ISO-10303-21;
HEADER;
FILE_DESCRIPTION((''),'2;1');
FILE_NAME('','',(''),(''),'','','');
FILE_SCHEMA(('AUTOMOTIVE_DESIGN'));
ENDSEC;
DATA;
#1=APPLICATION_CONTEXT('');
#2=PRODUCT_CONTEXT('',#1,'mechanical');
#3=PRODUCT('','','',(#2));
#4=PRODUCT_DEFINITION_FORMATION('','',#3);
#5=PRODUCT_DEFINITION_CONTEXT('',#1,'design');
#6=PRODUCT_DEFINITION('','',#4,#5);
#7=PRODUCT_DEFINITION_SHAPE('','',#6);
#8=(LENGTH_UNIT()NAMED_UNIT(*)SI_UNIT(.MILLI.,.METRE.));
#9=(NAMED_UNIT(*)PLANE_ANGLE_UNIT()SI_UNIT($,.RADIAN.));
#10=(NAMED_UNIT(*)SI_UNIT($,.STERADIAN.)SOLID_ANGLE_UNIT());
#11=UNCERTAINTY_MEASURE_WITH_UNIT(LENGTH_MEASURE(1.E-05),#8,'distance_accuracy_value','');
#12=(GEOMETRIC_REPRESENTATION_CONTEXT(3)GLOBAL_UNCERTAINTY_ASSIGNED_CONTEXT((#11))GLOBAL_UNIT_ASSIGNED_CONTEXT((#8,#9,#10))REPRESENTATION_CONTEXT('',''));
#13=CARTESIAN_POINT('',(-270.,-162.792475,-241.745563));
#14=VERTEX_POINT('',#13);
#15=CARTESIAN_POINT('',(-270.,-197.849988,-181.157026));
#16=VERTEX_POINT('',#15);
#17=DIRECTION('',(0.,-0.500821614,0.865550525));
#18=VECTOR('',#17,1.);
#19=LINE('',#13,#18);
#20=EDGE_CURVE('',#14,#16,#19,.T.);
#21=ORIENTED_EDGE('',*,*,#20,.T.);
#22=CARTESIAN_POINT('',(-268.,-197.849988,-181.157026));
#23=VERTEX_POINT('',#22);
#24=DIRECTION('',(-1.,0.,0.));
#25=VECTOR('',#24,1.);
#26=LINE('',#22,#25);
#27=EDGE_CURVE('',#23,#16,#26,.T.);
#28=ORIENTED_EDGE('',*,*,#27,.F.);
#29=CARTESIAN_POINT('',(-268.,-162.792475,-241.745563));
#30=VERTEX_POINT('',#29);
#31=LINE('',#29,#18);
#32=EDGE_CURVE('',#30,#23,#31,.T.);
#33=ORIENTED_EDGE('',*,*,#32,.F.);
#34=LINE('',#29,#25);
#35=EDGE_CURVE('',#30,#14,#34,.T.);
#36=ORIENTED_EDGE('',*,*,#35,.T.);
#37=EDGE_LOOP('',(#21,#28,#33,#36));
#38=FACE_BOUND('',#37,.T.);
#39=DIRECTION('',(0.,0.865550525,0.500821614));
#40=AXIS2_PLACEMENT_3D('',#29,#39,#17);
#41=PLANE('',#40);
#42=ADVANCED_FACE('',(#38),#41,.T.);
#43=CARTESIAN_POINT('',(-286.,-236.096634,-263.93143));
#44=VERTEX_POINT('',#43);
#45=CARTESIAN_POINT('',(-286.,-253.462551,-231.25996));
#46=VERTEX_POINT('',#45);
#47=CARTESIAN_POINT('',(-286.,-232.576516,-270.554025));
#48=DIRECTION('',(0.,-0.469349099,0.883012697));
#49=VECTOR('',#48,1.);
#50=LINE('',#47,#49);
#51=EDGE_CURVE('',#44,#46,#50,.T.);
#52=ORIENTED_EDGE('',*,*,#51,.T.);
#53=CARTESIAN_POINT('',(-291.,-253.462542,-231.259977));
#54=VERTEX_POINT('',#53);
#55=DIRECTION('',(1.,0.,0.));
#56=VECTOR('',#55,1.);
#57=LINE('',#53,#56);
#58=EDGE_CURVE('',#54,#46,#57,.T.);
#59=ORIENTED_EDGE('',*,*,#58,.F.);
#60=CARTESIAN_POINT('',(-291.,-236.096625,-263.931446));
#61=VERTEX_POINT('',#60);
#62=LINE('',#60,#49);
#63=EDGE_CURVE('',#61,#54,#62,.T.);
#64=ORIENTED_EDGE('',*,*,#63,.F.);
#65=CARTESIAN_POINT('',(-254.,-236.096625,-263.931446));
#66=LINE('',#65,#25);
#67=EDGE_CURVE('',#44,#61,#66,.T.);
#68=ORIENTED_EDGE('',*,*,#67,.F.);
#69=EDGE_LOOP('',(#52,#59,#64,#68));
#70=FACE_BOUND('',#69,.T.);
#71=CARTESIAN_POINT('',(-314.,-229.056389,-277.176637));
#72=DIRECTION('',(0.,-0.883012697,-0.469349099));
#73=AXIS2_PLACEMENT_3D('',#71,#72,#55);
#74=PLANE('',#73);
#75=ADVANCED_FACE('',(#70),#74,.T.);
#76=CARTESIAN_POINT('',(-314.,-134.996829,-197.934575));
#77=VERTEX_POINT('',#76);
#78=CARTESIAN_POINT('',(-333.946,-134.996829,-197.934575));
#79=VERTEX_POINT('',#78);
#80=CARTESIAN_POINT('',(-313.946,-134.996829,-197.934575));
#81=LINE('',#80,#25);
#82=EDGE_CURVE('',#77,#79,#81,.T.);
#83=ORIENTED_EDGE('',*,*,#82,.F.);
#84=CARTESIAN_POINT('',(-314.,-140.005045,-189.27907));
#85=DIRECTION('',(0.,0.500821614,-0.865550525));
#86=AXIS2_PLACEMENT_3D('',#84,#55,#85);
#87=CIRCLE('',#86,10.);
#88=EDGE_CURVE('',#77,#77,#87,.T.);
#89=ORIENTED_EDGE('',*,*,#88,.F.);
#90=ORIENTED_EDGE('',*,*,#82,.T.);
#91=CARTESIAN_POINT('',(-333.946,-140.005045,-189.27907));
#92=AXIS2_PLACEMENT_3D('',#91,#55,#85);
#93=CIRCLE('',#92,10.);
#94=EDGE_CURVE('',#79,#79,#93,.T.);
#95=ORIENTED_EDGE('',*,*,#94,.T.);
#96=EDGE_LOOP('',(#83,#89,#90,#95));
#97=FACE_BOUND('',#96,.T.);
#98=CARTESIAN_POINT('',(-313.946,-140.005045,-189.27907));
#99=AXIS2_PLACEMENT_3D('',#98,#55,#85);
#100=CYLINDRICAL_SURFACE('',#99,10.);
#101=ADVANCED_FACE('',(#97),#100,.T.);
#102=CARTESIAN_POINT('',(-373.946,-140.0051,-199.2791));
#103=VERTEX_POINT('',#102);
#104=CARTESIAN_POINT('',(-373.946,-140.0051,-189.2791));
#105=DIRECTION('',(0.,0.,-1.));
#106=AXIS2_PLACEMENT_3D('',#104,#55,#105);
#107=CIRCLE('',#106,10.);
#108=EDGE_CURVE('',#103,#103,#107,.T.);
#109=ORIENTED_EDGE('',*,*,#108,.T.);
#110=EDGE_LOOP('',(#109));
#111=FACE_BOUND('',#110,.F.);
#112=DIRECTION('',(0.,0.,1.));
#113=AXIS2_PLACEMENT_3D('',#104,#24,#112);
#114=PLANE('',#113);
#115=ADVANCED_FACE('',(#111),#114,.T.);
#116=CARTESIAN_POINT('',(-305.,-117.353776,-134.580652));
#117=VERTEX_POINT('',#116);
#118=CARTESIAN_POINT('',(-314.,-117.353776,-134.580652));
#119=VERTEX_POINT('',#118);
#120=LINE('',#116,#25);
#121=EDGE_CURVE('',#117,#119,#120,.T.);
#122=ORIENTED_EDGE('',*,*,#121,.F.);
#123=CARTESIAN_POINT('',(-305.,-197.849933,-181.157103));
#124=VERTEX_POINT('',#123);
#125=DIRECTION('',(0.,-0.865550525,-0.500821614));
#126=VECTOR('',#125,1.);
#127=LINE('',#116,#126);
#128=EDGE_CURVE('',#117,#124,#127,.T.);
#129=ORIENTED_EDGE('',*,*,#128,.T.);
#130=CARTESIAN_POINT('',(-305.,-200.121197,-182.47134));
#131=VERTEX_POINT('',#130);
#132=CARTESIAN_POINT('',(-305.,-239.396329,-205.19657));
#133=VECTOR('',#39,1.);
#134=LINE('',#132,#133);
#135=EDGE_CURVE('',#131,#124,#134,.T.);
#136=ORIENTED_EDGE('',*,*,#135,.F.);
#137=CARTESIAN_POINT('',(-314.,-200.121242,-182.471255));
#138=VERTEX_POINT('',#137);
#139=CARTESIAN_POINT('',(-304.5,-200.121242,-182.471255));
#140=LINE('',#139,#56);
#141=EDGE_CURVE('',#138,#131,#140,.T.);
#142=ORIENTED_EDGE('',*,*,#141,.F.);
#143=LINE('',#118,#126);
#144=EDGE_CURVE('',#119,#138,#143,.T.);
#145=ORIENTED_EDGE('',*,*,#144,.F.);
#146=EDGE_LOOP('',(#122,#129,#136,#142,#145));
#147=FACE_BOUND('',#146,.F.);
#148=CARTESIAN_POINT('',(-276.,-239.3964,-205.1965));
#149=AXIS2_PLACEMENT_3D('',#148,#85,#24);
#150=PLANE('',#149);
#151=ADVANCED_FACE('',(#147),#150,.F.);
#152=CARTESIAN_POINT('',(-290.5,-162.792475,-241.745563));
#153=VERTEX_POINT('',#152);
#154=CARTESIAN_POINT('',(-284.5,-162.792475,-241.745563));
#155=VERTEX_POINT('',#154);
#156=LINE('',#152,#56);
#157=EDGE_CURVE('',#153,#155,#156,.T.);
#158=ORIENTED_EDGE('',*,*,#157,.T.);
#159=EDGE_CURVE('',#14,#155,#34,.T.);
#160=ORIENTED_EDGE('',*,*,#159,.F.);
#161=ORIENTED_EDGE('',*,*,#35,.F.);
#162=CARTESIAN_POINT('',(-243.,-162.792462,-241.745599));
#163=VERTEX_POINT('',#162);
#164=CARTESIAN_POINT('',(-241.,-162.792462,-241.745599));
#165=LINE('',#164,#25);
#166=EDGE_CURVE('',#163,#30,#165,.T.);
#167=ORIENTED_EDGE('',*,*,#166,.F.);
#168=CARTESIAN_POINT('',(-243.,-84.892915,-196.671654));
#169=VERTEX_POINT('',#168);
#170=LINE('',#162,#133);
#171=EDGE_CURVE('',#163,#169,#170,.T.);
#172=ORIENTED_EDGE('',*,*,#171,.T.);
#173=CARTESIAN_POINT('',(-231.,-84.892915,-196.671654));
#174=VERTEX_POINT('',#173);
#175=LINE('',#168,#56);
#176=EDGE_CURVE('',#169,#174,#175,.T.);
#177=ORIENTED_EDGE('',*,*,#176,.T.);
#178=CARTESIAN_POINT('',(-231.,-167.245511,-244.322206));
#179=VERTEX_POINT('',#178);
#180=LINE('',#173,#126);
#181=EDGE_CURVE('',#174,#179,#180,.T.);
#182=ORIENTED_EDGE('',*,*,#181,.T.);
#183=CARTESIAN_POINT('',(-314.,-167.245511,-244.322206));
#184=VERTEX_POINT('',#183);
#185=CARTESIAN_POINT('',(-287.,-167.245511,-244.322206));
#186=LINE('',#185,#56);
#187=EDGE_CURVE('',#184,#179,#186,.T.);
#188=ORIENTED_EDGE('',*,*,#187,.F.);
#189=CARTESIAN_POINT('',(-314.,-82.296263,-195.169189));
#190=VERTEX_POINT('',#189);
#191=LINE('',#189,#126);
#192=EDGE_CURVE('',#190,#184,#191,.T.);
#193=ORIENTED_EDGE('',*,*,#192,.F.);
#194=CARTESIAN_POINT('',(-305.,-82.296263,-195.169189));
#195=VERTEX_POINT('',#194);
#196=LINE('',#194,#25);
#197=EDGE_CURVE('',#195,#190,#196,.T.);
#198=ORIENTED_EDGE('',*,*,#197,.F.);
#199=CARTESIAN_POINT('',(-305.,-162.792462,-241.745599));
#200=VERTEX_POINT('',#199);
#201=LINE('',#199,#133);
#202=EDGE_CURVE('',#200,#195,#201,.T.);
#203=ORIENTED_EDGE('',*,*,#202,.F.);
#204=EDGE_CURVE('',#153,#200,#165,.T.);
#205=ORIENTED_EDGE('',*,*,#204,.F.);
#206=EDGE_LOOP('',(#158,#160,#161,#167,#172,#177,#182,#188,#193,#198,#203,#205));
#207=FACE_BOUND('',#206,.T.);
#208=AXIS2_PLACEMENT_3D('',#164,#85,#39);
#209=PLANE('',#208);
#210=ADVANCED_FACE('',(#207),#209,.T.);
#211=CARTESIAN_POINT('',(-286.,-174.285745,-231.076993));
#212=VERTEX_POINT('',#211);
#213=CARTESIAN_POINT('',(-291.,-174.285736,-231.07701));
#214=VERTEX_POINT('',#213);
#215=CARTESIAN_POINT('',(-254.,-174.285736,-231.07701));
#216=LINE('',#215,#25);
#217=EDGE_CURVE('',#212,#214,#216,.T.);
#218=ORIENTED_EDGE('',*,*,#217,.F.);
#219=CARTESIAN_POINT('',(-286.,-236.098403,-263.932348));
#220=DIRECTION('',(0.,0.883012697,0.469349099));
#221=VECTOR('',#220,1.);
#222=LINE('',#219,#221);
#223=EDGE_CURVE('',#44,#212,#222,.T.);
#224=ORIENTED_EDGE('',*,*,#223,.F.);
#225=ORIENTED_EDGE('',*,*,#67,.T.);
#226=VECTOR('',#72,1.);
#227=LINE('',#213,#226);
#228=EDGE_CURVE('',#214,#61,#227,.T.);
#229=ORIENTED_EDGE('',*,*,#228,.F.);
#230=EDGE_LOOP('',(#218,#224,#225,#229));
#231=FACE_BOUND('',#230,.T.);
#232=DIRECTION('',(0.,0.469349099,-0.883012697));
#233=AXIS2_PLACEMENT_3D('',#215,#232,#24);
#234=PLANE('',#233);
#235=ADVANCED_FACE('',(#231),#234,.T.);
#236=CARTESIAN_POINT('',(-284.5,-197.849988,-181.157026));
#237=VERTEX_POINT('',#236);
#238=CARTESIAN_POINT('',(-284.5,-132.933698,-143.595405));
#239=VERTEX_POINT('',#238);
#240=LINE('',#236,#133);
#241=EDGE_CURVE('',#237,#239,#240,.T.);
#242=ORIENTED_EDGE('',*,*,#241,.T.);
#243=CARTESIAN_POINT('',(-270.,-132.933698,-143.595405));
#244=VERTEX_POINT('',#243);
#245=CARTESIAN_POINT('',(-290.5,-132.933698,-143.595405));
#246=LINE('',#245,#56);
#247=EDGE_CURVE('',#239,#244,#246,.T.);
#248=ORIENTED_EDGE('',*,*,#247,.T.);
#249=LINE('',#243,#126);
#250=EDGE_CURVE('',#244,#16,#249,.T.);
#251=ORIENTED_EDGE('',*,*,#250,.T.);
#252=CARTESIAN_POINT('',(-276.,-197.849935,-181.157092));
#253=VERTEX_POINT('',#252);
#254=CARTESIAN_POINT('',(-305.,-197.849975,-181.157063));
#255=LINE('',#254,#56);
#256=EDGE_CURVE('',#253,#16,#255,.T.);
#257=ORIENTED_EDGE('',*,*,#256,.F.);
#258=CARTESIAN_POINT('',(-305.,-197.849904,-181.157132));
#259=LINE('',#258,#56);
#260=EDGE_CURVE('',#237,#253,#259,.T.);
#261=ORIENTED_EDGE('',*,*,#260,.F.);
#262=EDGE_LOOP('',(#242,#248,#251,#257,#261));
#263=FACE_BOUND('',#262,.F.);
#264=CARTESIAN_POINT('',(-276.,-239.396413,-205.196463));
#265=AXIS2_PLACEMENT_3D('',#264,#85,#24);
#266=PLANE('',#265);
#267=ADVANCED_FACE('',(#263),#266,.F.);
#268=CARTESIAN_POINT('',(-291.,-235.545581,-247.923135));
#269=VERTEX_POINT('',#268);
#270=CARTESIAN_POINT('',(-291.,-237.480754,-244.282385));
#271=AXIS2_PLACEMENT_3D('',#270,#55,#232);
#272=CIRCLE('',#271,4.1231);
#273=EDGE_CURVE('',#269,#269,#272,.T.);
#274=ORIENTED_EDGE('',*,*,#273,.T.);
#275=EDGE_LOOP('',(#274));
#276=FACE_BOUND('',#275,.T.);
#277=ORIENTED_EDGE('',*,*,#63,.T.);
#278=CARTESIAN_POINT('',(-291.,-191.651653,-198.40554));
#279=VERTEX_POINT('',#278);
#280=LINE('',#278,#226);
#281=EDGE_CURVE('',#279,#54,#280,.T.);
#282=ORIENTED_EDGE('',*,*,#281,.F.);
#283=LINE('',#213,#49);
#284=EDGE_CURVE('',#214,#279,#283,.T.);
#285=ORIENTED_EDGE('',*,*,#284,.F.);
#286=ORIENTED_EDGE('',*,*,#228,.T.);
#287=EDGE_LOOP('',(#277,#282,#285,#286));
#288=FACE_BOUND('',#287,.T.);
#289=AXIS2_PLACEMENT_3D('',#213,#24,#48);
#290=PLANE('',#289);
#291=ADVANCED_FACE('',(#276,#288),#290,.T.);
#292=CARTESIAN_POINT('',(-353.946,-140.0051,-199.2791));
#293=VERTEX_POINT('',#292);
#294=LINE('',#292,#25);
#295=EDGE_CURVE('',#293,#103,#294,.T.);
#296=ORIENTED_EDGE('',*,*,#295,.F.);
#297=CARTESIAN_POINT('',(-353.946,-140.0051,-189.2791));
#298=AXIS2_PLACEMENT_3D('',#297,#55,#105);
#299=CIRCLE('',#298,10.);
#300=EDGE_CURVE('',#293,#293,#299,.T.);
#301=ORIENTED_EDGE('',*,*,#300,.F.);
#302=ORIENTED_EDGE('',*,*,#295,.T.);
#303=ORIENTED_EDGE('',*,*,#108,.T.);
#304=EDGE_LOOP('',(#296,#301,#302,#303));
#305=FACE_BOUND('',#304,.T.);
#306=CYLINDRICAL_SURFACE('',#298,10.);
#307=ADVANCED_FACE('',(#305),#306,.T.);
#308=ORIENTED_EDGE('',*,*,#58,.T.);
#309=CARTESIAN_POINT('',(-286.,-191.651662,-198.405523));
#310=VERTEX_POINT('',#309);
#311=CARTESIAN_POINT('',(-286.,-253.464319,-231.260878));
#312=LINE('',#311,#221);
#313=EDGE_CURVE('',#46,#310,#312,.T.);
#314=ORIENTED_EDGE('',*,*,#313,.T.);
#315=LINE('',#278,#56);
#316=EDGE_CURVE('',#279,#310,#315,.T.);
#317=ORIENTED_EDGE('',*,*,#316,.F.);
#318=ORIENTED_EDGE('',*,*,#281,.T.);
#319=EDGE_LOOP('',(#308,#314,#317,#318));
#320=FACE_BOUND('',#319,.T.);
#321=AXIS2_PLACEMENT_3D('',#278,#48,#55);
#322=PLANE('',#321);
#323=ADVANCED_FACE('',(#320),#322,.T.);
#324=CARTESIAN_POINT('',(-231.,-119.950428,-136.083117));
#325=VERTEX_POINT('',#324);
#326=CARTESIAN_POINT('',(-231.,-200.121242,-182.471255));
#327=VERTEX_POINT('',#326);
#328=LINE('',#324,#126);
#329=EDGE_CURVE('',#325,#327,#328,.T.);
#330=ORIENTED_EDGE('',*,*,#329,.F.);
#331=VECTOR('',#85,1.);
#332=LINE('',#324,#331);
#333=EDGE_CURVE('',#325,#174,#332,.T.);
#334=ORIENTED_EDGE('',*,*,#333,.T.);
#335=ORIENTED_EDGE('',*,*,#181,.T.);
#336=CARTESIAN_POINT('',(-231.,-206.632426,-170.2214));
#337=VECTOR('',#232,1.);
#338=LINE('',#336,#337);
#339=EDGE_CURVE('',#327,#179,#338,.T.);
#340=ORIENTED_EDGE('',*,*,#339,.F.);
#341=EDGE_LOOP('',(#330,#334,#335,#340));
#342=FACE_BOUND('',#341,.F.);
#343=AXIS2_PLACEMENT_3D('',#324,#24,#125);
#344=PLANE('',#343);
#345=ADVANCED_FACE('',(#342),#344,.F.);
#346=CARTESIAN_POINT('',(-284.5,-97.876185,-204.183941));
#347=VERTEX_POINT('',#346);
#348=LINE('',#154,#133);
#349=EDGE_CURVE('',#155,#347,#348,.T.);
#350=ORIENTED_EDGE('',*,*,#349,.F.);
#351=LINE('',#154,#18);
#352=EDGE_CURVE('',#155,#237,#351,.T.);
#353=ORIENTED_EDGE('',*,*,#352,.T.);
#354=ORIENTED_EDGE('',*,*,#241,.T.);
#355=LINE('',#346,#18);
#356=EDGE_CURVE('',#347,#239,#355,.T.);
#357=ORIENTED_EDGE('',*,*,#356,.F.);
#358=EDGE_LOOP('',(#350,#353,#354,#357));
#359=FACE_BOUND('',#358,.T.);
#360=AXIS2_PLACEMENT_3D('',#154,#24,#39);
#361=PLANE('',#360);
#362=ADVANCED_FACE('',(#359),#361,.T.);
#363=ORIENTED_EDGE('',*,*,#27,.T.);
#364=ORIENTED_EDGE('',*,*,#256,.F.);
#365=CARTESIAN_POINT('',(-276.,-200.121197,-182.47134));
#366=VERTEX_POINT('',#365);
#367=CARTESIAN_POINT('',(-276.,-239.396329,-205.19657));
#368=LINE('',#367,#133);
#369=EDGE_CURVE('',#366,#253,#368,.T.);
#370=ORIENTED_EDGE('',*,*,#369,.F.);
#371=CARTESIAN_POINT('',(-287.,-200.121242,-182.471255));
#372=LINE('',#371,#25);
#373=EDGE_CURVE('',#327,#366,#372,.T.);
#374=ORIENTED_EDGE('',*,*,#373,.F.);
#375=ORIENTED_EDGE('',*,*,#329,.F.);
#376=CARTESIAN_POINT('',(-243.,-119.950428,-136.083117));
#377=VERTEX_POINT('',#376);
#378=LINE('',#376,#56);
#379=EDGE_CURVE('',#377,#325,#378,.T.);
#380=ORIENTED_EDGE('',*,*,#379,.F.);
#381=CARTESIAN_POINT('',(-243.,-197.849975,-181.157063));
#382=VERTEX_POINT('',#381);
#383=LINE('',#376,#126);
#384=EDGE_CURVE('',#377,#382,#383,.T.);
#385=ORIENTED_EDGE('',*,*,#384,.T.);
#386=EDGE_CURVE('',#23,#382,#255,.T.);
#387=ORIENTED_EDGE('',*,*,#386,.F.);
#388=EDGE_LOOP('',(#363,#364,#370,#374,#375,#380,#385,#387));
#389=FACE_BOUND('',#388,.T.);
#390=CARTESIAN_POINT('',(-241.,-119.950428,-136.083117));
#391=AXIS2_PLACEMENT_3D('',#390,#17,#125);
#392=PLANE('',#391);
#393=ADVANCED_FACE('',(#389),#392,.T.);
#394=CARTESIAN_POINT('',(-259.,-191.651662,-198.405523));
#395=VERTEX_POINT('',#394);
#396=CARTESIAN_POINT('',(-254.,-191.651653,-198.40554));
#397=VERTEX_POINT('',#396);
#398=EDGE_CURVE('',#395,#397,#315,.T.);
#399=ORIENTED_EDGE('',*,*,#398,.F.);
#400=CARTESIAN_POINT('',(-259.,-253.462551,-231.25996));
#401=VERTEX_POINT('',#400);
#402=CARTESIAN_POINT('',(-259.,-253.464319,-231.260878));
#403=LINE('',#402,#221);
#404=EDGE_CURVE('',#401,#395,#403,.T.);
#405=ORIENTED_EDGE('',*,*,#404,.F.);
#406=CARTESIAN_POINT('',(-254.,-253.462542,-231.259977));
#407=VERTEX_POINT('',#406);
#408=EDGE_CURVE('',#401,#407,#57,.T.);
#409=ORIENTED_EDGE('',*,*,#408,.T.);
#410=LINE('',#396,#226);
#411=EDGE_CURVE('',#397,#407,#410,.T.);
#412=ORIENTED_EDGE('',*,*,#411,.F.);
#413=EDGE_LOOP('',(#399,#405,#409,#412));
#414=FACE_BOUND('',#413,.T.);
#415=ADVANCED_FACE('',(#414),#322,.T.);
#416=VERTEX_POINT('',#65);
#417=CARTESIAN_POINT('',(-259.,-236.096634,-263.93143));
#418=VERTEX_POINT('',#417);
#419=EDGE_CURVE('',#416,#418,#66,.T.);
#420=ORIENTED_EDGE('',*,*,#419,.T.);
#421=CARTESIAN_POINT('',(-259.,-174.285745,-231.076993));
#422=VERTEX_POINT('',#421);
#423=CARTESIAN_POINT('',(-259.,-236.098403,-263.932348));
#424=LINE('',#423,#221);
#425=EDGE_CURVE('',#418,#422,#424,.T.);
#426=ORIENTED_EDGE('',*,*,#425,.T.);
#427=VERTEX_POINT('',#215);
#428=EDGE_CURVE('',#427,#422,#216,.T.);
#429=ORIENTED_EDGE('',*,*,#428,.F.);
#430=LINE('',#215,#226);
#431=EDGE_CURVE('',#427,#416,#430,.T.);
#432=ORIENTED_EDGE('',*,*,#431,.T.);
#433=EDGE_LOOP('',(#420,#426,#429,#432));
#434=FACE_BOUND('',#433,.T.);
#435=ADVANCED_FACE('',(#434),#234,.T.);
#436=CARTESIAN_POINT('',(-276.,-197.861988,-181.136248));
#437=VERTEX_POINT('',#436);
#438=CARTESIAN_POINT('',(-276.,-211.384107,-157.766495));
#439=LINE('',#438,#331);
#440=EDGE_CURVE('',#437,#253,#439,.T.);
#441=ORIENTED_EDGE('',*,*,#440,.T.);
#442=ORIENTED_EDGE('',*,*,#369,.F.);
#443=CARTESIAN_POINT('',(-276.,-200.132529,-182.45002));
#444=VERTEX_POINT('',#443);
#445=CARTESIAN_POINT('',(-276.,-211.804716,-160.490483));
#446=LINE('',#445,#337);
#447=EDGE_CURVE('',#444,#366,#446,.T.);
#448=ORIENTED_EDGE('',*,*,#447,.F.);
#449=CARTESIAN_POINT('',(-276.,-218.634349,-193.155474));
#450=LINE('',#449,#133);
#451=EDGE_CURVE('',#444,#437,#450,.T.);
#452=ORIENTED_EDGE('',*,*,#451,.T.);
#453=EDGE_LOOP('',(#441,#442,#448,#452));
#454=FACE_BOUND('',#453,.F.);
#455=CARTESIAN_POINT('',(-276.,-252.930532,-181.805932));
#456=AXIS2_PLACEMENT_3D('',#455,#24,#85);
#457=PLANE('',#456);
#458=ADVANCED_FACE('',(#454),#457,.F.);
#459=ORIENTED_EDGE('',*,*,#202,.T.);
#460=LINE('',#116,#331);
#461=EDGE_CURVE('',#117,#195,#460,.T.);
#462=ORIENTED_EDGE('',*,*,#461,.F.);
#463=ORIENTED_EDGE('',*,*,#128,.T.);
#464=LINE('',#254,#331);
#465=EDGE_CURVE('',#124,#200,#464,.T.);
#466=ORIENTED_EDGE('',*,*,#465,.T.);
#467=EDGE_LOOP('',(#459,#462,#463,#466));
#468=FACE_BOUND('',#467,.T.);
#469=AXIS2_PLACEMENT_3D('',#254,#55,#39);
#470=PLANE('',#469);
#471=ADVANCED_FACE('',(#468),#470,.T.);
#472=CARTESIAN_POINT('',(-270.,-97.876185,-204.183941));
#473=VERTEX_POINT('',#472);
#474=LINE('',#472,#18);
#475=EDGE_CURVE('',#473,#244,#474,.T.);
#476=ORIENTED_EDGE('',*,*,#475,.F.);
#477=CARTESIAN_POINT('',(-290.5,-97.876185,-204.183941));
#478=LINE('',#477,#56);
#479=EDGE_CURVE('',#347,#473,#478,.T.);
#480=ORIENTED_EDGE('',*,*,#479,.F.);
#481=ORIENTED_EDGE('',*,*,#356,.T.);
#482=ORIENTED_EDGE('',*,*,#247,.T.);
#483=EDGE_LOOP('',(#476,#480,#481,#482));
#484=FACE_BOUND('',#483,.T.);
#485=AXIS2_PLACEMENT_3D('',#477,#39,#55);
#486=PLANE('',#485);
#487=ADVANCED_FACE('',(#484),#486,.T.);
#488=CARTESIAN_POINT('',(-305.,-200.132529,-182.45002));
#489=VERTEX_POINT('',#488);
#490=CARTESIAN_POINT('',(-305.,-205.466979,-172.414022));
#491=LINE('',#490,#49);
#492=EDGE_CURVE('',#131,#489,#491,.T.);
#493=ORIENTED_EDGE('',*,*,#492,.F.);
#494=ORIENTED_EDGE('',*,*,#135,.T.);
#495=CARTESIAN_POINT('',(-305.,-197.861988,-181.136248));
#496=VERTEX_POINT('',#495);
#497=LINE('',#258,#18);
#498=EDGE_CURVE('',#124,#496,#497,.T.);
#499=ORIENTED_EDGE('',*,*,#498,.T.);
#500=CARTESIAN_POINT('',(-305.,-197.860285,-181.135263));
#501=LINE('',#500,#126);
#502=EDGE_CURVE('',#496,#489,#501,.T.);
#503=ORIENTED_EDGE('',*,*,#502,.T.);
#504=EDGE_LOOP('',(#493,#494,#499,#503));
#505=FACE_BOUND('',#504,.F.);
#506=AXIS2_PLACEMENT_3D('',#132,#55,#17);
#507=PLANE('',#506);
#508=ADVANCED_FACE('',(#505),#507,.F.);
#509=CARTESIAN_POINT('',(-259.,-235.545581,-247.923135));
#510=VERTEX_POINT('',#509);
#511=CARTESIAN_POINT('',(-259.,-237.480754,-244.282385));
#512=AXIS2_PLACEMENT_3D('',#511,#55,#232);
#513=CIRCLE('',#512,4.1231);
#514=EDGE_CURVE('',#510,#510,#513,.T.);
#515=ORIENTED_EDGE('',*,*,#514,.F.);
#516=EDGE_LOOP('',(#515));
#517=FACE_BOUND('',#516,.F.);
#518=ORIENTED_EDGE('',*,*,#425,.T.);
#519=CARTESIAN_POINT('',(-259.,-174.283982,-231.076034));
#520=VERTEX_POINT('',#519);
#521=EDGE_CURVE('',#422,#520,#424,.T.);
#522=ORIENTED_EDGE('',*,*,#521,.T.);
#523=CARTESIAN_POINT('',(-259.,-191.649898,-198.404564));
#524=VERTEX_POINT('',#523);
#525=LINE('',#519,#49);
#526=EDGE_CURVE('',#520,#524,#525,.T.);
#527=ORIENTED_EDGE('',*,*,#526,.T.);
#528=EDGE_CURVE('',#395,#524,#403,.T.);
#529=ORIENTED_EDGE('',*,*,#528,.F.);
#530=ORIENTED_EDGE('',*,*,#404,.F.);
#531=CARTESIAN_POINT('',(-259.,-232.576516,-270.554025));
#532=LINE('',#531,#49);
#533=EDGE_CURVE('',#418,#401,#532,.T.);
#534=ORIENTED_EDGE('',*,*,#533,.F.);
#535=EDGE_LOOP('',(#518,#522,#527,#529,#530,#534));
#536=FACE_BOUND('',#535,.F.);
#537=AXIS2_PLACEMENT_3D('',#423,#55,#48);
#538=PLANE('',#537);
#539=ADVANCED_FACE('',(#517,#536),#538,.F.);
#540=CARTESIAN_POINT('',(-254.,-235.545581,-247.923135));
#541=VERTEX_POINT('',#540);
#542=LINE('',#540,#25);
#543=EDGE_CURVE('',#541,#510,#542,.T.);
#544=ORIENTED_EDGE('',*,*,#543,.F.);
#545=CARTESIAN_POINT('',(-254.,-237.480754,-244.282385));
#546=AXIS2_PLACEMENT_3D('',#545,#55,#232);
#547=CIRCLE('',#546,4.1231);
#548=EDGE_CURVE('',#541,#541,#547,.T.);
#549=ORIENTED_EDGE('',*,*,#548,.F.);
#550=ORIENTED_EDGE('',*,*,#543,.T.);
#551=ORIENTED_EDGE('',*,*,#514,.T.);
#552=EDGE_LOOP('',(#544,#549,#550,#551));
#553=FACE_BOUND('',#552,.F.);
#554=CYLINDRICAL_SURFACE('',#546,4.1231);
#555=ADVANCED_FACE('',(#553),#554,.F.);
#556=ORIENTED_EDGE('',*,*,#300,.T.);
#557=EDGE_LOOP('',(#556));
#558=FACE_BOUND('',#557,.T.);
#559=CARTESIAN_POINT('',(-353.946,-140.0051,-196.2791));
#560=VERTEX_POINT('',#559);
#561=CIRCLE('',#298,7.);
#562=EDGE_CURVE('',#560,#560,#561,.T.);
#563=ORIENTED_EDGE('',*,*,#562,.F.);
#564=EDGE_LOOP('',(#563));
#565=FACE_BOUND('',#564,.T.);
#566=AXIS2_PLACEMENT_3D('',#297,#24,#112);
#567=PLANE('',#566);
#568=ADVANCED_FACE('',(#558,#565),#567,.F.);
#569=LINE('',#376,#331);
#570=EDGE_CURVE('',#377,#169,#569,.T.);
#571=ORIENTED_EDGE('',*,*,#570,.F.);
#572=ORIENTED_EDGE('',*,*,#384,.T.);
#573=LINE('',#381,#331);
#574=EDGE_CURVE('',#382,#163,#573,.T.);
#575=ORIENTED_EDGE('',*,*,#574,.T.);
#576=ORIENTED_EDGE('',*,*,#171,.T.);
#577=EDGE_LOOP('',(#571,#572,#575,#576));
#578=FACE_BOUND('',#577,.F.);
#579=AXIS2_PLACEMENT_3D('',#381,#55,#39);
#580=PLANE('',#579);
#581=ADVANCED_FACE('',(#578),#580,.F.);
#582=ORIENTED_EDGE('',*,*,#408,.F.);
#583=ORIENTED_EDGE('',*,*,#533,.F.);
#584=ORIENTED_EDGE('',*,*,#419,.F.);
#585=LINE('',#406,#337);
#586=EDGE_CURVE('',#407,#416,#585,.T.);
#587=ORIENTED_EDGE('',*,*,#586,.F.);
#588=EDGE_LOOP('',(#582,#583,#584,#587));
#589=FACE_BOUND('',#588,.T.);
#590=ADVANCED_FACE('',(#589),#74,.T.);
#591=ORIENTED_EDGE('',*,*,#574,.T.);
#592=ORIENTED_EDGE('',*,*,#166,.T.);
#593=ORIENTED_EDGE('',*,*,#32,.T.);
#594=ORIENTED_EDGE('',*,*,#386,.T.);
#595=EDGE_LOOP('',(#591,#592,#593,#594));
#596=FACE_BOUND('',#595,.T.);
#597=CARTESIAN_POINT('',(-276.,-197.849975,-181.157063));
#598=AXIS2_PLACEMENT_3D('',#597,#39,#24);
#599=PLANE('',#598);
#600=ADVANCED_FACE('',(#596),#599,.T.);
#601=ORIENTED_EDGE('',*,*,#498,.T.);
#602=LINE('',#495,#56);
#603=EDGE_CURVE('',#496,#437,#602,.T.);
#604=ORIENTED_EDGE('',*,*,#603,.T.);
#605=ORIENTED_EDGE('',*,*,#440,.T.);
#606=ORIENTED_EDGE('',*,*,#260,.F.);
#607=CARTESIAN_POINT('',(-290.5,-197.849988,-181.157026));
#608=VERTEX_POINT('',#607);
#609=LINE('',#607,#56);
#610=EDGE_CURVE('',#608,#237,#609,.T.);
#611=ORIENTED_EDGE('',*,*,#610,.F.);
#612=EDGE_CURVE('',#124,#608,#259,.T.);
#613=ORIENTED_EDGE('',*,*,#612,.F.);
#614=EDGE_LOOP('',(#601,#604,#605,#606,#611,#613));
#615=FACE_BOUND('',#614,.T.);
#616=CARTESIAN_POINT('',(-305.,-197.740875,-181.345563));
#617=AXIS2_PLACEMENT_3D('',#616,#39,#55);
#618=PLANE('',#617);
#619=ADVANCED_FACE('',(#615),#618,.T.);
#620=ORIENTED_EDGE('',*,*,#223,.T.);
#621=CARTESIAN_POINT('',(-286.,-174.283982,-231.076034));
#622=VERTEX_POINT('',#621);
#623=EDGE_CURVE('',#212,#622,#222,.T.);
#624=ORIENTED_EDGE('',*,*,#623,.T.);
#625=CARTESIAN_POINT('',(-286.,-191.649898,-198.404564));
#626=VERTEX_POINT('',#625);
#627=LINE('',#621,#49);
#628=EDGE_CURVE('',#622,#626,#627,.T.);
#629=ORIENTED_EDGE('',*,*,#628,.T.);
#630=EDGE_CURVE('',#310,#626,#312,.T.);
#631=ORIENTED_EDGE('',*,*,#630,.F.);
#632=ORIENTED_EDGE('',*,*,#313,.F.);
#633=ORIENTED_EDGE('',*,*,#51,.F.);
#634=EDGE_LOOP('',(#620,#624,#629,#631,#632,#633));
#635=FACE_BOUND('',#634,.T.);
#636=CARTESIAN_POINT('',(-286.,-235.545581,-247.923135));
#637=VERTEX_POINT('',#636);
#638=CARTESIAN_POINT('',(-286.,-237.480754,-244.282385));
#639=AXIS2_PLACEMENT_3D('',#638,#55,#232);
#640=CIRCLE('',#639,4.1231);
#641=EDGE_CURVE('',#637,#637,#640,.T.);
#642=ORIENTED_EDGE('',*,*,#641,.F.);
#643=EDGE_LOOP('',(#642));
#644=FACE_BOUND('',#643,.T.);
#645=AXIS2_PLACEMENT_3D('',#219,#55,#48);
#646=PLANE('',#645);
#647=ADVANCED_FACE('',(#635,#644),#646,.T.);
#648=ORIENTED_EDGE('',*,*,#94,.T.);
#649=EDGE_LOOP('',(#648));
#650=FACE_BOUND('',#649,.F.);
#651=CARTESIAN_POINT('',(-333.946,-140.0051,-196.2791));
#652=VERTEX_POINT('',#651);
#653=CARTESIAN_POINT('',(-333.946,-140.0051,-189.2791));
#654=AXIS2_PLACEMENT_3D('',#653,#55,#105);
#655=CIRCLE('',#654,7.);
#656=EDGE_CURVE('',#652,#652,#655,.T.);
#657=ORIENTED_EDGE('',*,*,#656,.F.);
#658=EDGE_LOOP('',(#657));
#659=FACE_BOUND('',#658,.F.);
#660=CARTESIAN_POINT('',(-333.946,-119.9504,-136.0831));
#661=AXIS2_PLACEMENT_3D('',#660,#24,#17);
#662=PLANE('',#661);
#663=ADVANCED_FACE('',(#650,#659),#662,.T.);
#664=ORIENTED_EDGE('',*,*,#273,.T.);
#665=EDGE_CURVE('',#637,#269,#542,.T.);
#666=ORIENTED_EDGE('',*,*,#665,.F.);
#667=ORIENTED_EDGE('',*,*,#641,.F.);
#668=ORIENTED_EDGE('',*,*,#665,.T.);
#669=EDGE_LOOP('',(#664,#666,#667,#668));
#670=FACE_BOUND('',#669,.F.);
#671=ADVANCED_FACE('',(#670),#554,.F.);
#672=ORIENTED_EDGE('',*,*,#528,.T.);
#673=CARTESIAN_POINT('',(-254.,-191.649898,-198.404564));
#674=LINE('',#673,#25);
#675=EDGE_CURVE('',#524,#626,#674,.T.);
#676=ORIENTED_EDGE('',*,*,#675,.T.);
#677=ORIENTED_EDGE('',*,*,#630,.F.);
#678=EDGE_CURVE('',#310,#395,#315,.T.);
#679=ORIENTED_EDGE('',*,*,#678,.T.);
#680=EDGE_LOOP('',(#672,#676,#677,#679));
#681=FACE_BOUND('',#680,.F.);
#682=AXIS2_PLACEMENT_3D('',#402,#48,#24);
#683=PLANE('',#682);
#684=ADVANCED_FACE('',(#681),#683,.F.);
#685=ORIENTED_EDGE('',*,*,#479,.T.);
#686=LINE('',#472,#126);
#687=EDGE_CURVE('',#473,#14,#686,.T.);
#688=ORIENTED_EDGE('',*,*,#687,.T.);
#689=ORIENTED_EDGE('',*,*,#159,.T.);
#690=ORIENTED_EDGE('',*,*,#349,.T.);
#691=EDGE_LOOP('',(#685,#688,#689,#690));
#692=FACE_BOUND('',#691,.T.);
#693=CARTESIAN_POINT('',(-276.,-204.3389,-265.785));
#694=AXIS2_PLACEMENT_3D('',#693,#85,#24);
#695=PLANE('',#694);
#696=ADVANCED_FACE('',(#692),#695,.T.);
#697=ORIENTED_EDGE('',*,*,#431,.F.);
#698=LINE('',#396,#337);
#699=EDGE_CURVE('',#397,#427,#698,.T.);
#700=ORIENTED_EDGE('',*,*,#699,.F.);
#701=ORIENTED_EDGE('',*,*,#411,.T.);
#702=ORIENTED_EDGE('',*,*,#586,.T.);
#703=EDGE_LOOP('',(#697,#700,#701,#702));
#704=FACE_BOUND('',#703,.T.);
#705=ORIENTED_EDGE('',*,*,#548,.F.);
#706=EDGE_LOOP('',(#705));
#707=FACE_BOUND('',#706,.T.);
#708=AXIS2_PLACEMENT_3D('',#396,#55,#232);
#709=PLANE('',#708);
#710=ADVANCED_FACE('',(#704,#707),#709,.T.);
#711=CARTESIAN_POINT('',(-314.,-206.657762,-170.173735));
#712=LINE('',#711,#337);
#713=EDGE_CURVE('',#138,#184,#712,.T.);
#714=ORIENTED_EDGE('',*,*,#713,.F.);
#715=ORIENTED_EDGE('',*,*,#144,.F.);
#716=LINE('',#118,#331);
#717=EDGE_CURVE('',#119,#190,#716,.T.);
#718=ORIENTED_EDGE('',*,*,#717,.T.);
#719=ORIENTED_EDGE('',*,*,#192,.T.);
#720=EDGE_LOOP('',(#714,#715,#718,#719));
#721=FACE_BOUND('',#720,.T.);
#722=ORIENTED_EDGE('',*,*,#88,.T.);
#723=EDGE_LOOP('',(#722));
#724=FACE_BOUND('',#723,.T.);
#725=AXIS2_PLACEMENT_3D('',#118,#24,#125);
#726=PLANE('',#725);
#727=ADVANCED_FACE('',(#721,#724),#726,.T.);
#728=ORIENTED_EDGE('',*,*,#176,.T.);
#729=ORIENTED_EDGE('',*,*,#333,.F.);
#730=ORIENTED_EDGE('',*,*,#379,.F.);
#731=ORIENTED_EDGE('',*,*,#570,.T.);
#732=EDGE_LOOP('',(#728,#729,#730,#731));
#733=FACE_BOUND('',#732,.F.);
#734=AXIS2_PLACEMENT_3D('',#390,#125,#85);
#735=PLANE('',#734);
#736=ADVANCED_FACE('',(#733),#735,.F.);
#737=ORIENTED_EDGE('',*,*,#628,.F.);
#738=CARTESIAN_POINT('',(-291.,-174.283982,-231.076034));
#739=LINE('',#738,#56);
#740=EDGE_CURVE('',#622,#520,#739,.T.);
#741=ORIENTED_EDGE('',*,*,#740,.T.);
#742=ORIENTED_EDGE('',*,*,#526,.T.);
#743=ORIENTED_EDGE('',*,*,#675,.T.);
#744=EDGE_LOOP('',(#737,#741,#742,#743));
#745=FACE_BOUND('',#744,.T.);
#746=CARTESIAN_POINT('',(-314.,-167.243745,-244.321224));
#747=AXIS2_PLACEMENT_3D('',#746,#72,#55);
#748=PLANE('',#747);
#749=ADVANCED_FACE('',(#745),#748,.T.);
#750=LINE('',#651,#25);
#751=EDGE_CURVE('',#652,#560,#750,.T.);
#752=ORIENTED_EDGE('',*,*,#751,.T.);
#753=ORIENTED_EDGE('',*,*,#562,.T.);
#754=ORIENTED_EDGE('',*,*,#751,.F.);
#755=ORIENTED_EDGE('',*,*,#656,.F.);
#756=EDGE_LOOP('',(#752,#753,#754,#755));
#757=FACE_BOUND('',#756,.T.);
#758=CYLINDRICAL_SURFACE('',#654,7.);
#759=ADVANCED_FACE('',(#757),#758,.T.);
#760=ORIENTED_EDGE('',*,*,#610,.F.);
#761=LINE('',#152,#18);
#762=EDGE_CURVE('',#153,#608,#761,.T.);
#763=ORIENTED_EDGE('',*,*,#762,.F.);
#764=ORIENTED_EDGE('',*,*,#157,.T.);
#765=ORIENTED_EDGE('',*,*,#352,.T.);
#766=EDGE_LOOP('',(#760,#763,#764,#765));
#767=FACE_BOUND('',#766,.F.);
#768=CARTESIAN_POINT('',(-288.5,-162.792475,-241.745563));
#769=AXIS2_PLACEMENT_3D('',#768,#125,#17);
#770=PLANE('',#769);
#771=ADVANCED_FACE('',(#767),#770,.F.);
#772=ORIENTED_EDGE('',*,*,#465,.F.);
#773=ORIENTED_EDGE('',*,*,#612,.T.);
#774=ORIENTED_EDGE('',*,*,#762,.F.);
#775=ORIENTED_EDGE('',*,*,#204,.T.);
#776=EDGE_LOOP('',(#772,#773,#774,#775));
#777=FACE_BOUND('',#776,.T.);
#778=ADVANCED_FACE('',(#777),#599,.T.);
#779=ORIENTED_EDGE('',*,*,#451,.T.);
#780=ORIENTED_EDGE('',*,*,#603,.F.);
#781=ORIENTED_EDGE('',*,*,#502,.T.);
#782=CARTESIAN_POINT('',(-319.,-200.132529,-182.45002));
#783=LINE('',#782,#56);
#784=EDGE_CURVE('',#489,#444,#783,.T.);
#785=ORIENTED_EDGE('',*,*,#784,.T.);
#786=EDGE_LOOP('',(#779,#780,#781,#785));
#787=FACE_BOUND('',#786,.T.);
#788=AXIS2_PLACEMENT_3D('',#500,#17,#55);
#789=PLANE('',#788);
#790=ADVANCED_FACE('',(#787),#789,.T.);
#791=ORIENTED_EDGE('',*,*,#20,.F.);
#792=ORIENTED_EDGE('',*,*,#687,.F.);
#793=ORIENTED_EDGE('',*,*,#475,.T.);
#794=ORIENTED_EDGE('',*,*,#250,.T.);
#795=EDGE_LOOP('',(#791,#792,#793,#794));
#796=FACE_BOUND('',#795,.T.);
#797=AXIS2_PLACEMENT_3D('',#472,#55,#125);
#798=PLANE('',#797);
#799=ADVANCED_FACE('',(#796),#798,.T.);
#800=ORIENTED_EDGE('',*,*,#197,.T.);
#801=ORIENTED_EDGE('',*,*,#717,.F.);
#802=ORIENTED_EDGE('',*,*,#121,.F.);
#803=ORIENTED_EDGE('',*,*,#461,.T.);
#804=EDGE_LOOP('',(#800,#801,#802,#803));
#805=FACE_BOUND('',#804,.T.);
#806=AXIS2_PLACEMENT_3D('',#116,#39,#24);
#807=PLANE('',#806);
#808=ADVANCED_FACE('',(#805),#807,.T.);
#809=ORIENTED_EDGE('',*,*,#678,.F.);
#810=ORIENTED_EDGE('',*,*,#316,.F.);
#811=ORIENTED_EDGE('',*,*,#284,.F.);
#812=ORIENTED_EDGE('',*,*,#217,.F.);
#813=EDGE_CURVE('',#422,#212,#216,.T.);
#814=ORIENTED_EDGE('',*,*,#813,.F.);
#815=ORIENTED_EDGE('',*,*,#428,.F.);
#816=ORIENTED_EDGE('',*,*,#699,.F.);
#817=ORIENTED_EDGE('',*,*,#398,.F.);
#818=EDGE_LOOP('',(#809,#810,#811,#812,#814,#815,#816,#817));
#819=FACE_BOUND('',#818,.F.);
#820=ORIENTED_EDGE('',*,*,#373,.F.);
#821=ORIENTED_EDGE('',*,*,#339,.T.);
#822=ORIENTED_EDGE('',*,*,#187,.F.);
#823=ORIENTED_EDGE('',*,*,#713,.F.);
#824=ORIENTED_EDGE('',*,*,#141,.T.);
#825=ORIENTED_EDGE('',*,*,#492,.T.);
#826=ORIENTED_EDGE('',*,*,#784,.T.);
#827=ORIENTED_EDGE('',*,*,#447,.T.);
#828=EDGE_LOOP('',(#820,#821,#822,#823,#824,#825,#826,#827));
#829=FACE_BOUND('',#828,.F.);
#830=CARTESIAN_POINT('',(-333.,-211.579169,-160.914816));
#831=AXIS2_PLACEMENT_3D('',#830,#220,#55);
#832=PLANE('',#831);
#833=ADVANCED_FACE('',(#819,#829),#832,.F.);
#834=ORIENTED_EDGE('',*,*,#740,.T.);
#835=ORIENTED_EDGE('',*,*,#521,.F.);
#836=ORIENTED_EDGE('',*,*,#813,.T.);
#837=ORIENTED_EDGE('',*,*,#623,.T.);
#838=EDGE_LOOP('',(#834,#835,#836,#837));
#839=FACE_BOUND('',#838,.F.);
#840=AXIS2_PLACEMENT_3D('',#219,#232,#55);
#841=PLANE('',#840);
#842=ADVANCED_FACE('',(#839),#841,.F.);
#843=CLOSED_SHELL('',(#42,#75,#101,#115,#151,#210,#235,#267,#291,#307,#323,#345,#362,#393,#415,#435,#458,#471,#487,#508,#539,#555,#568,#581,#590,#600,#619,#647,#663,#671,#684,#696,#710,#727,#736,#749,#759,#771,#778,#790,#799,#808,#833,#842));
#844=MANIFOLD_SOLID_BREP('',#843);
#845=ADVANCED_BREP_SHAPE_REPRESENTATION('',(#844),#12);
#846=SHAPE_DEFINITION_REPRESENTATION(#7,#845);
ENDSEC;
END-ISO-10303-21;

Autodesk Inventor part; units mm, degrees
sketch "Sketch1" plane through (0, 0, 0) normal (1, 0, 0) x (0, 1, 0)
  line L0 (15, -38) -> (-51, -38)
  line L1 (-51, -38) -> (-51, -56)
  line L2 (-51, -56) -> (15, -56)
  line L3 (15, -38) -> (15, -56)
  arc A0 (29.5, -43.2058) -> (20.5, -58.7942) centre (25, -51) ccw
  arc A1 (33.0623, -37.0358) -> (16.9377, -64.9642) centre (25, -51) ccw
  line L4 (29.5, -43.2058) -> (39.0263, -48.7058)
  line L5 (20.5, -58.7942) -> (30.0263, -64.2942)
  line L6 (16.9377, -64.9642) -> (26.464, -70.4642)
  line L7 (33.0623, -37.0358) -> (42.5885, -42.5358)
  line L8 (42.5885, -42.5358) -> (39.0263, -48.7058)
  line L9 (30.0263, -64.2942) -> (26.464, -70.4642)
  line L10 (-51, -38) -> (-79, -38)
  line L11 (-79, -38) -> (-79, -56)
  line L12 (-51, -56) -> (-79, -56)
  dimension "d1" = 18
extrude "Extrusion1" add sketch "Sketch1" along normal blind 10 contours L3 A1 L2 L1 L0 | A1 L7 L8 L4 A0 L5 L9 L6 L2 L3 | L3 L2 A1
thicken "Thicken1" operation add thickness 5 both sides no extend neighbours yes toward (0, 0.8660254, -0.5) faces at (3.3333, 28.8389, -66.3509)
thicken "Thicken2" operation add thickness 5 both sides no extend neighbours yes toward (0, 0.8660254, -0.5) faces at (3.3333, 41.4011, -44.5924)
thicken "Thicken3" operation add thickness 200 both sides no extend neighbours yes toward (0, -1, 0) faces at (3.3333, -51, -44)
thicken "Thicken4" operation add thickness 30 both sides no extend neighbours yes toward (-1, 0, 0) faces at (0, -75.4432, -44)
sketch "Sketch2" plane through (10, 0, 0) normal (1, 0, 0) x (0, 0, -1)
  arc A0 (37.0358, 33.0623) -> (38.3509, 15) centre (51, 25) ccw projected
  line L0 (56, 10) -> (38.3509, 15)
  line L1 (38.3509, 15) -> (23, -17)
  line L2 (23, -17) -> (9, -332)
  line L3 (9, -332) -> (100, -328)
  line L4 (100, -328) -> (71, -47)
  line L5 (71, -47) -> (56, 10)
  point P0 (0, 0)
extrude "Extrusion2" cut sketch "Sketch2" against normal blind 100
sketch "Sketch3" plane through (10, 0, 0) normal (1, 0, 0) x (0, 0, -1)
  line L0 (56, 10) -> (152, -151)
  line L1 (152, -151) -> (131, -151)
  line L2 (38.3509, 15) -> (56, 10) projected
  line L3 (131, -151) -> (38.3509, 15)
  point P0 (0, 0)
extrude "Extrusion3" add sketch "Sketch3" against normal blind 40
thicken "Thicken5" operation add thickness 100 both sides no extend neighbours yes toward (0, -1, 0) faces at (-3.3333, -151, -145)
sketch "Sketch4" plane through (10, 0, 0) normal (1, 0, 0) x (0, 0, -1)
  line L0 (29, -65) -> (197, -65)
  line L1 (197, -65) -> (243, -262)
  line L2 (243, -262) -> (173, -278.3452)
  line L3 (173, -278.3452) -> (29, -65)
  point P0 (0, 0)
extrude "Extrusion4" cut sketch "Sketch4" against normal blind 40
thicken "Thicken6" operation add thickness 40 both sides no extend neighbours yes toward (1, 0, 0) faces at (10, 14.7562, -38.117)
thicken "Thicken7" operation add thickness 5 both sides no extend neighbours yes toward (0, -0.5, -0.8660254) faces at (-16.6667, 26.1753, -70.2976) (-3.3333, 10.1872, -57.3703) (-3.3333, -15.1835, -71.0162)
ref_plane "Work Plane1" through (10, -65, -83.0011) normal (1, 0, 0) x (0, 0, -1)
sketch "Sketch6" plane through (10, -65, -83.0011) normal (1, 0, 0) x (0, 0, -1)
  line L0 (23.5408, 0) -> (0, 0) projected
  line L1 (23.5408, 0) -> (65, -73)
  line L2 (65, -73) -> (86.5815, -111)
  line L3 (0, 0) -> (-44.6502, 80) projected
  line L4 (0, 0) -> (59, -111)
  line L5 (59, -111) -> (86.5815, -111)
  point P0 (-83.0011, 65)
extrude "Extrusion6" add sketch "Sketch6" along normal mid plane 40
thicken "Thicken8" operation add thickness 100 both sides no extend neighbours yes toward (0, -1, 0) faces at (3.3333, -176, -151.1949)
thicken "Thicken9" operation add thickness 20 both sides no extend neighbours yes toward (0, 0.8660254, -0.5) faces at (-16.6667, 45.7312, -47.0924)
thicken "Thicken10" operation add thickness 20 both sides no extend neighbours yes toward (0, 0.8660254, -0.5) faces at (-3.3333, 32.3357, -70.2943)
sketch "Sketch7" plane through (30, -65, -83.0011) normal (1, 0, 0) x (0, 0, -1)
  line L0 (112.1532, -211) -> (143.3749, -211) projected
  line L1 (23.5408, 0) -> (143.3749, -211) projected
  line L2 (143.3749, -211) -> (130, -187.4499)
  line L3 (130, -187.4499) -> (99.6355, -187.4499)
  line L4 (0, 0) -> (112.1532, -211) projected
  line L5 (112.1532, -211) -> (99.6355, -187.4499)
  point P0 (-83.0011, 65)
extrude "Extrusion7" add sketch "Sketch7" against normal blind 400
thicken "Thicken12" operation add thickness 65 both sides no extend neighbours yes toward (1, 0, 0) faces at (-370, -268.15, -211.5104)
sketch "Sketch8" plane through (-305, -276, -226.376) normal (-1, 0, 0) x (0, 0, 1)
  line L0 (43.7393, 23.5501) -> (13.3749, 23.5501) projected
  line L1 (43.7393, 23.5501) -> (20.991, 36.7127)
  line L2 (13.3749, 23.5501) -> (43.7393, 23.5501) projected
  line L3 (20.991, 36.7127) -> (13.3749, 23.5501)
  point P0 (226.376, 276)
extrude "Extrusion8" add sketch "Sketch8" against normal blind 300
sketch "Sketch9" plane through (-305, -239.2873, -205.385) normal (0, 0.8655505, 0.5008216) x (1, 0, 0)
  line L0 (0, -0.2177) -> (0, -27.2417) projected
  line L1 (0, -0.2177) -> (0, -27.2417)
  line L2 (0, -27.2417) -> (29, -27.2417)
  line L3 (0, -27.2417) -> (335, -27.2417) projected
  line L4 (0, -0.2177) -> (29, -0.2177)
  line L5 (0, -0.2177) -> (335, -0.2177) projected
  line L6 (29, -27.2417) -> (29, -0.2177)
  point P0 (305, -57.9308)
extrude "Extrusion9" add sketch "Sketch9" along normal blind 70
thicken "Thicken13" operation add thickness 15 both sides no extend neighbours yes toward (0, -0.8655505, -0.5008216) faces at (-295.3333, -187.8307, -154.5452)
thicken "Thicken14" operation add thickness 7 both sides no extend neighbours yes toward (0, -0.8655505, -0.5008216) faces at (-295.3333, -200.8139, -162.0576)
sketch "Sketch10" plane through (-276, -239.3964, -205.1965) normal (0, 0.5008216, -0.8655505) x (-1, 0, 0)
  line L0 (0, 48) -> (29, 48) projected
  line L1 (0, 48) -> (-35, 48)
  line L2 (-35, 48) -> (-35, 81)
  line L3 (-35, 81) -> (-35, 106)
  line L4 (29, 48) -> (29, 121)
  line L5 (-35, 106) -> (-35, 138)
  line L6 (-35, 138) -> (-45, 138)
  line L7 (-45, 138) -> (-45, 41)
  line L8 (-45, 41) -> (29, 41)
  line L9 (29, 0) -> (29, 48) projected
  line L10 (29, 41) -> (29, 48)
  line L11 (29, 48) -> (29, 41)
  line L12 (29, 121) -> (29, 141)
  line L13 (29, 141) -> (38, 141)
  line L14 (38, 141) -> (38, 41)
  line L15 (38, 41) -> (29, 41)
  line L16 (29, 81) -> (0, 81)
  line L17 (0, 81) -> (0, 48)
  point P0 (-276, 309.9765)
  dimension "d49" = 35
extrude "Extrusion10" add sketch "Sketch10" along normal blind 70 contours L0 L9 L8 L7 L6 L5 L3 L2 L1 | L4 L12 L13 L14 L15 L9
sketch "Sketch12" plane through (-276, -204.3389, -265.785) normal (0, 0.5008216, -0.8655505) x (-1, 0, 0)
  line L0 (29, 48) -> (0, 48) projected
  line L1 (14.5, 48) -> (14.5, 123)
  line L2 (14.5, 123) -> (-8, 123)
  line L3 (-8, 123) -> (-8, 48)
  line L4 (-8, 48) -> (14.5, 48)
  point P0 (-276, 309.9765)
extrude "Extrusion11" add sketch "Sketch12" against normal blind 70
thicken "Thicken15" operation add thickness 2 both sides no extend neighbours yes toward (-1, 0, 0) faces at (-268, -142.8866, -176.3122)
thicken "Thicken16" operation add thickness 2 both sides no extend neighbours yes toward (1, 0, 0) faces at (-290.5, -142.8866, -176.3122)
thicken "Thicken17" operation add thickness 4 both sides no extend neighbours yes toward (1, 0, 0) faces at (-288.5, -142.8866, -176.3122)
thicken "Thicken18" operation add thickness 2 both sides no extend neighbours yes toward (-1, 0, 0) faces at (-241, -160.1976, -186.3286)
ref_plane "Work Plane2" through (-137.5, -65, -83.0011) normal (1, 0, 0) x (0, 0, -1)
sketch "Sketch13" plane through (-137.5, -65, -83.0011) normal (1, 0, 0) x (0, 0, -1)
  line L0 (143.3749, -211) -> (112.1532, -211) projected
  line L1 (130, -187.4499) -> (143.3749, -211) projected
  line L2 (143.3749, -211) -> (14, -211)
  line L3 (14, -211) -> (14, -187.4499)
  line L4 (14, -187.4499) -> (130, -187.4499)
  point P0 (-83.0011, 65)
extrude "Extrusion12" add sketch "Sketch13" along normal mid plane 30
thicken "Thicken19" operation add thickness 150 both sides no extend neighbours yes toward (0, 0, 1) faces at (-142.5, -260.3, -97.0011)
thicken "Thicken20" operation add thickness 20 both sides no extend neighbours yes toward (0, 0, -1) faces at (-142.5, -260.3, 52.9989)
sketch "Sketch14" plane through (-152.5, -276, 32.9989) normal (0, 0, 1) x (1, 0, 0)
  line L0 (30, 23.5501) -> (30, 0) projected
  line L1 (0, 23.5501) -> (30, 23.5501) projected
  line L2 (0, 0) -> (30, 0) projected
  line L3 (0, 0) -> (0, 23.5501) projected
  circle A0 centre (15, 11.775) radius 8
  point P0 (152.5, 276)
extrude "Extrusion13" add sketch "Sketch14" along normal blind 70 contours A0
thicken "Thicken21" operation add thickness 30 both sides no extend neighbours yes toward (0, 0, -1) faces at (-134.9108, -264.8631, 102.9989)
sketch "Sketch15" plane through (-122.5, -65, -83.0011) normal (1, 0, 0) x (0, 0, -1)
  arc A0 (-202, -264) -> (-180, -132) centre (-216.7127, -193.7146) ccw
  arc A1 (-204.0725, -254.0995) -> (-185.1714, -140.6932) centre (-216.7127, -193.7146) ccw
  arc A2 (-200.0254, -273.433) -> (-175.0728, -123.7173) centre (-216.7127, -193.7146) ccw
  line L0 (-175.0728, -123.7173) -> (-185.1714, -140.6932)
  line L1 (-204.0725, -254.0995) -> (-200.0254, -273.433)
  point P0 (-83.0011, 65)
extrude "Extrusion14" add sketch "Sketch15" against normal blind 30
sketch "Sketch16" plane through (-122.5, -65, -83.0011) normal (1, 0, 0) x (0, 0, -1)
  point P0 (-83.0011, 65)
ref_plane "Work Plane3" through (-137.5, -65, -83.0011) normal (1, 0, 0) x (0, 0, -1)
sketch "Sketch17" plane through (-137.5, -65, -83.0011) normal (1, 0, 0) x (0, 0, -1)
  arc A0 (-204.0725, -254.0995) -> (-185.1714, -140.6932) centre (-216.7127, -193.7146) ccw projected
  arc A1 (-200.5833, -270.7677) -> (-176.465, -126.0576) centre (-216.7127, -193.7146) ccw
  line L0 (-176.465, -126.0576) -> (-223, -140.6932)
  line L1 (-223, -140.6932) -> (-219, -249)
  line L2 (-219, -249) -> (-200.5833, -270.7677)
  point P0 (-83.0011, 65)
extrude "Extrusion15" cut sketch "Sketch17" against normal blind 14
sketch "Sketch18" plane through (-122.5, -65, -83.0011) normal (1, 0, 0) x (0, 0, -1)
  point P0 (-83.0011, 65)
ref_plane "Work Plane4" through (-124.5, -65, -83.0011) normal (1, 0, 0) x (0, 0, -1)
sketch "Sketch19" plane through (-124.5, -65, -83.0011) normal (1, 0, 0) x (0, 0, -1)
  arc A0 (-200.0254, -273.433) -> (-175.0728, -123.7173) centre (-216.7127, -193.7146) ccw projected
  arc A1 (-200.6398, -270.4982) -> (-176.6058, -126.2942) centre (-216.7127, -193.7146) ccw
  line L0 (-176.6058, -126.2942) -> (-213.3412, -154.8678)
  line L1 (-213.3412, -154.8678) -> (-216.7127, -283)
  line L2 (-216.7127, -283) -> (-200.6398, -270.4982)
  point P0 (-83.0011, 65)
extrude "Extrusion16" cut sketch "Sketch19" against normal blind 14
thicken "Thicken22" operation add thickness 150 both sides no extend neighbours yes toward (1, 0, 0) faces at (-122.5, -268.15, -114.9306)
thicken "Thicken23" operation add thickness 150 both sides no extend neighbours yes toward (1, 0, 0) faces at (-152.5, -268.15, -114.9306)
thicken "Thicken24" operation add thickness 150 both sides no extend neighbours yes toward (1, 0, 0) faces at (-122.5, -266.9722, 59.5019)
thicken "Thicken25" operation add thickness 150 both sides no extend neighbours yes toward (1, 0, 0) faces at (-152.5, -266.9722, 59.5019)
sketch "Sketch20" plane through (-137.5, -264.225, 32.9989) normal (0, 0, -1) x (-1, 0, 0)
  circle A0 centre (0, 0) radius 10.0499
  point P0 (-137.5, 264.225)
extrude "Extrusion17" cut sketch "Sketch20" against normal blind 40
sketch "Sketch21" plane through (27.5, -276, 32.9989) normal (0, 0, 1) x (1, 0, 0)
  circle A0 centre (-13, 11) radius 8.9443
  point P0 (-27.5, 276)
extrude "Extrusion18" add sketch "Sketch21" along normal blind 40
thicken "Thicken26" operation add thickness 3 both sides no extend neighbours yes toward (0, -0.5353442, -0.844634) faces at (17.5, -302.3163, 64.9194) (7.5, -200.0346, 98.8042) (7.5, -331.9885, 118.3734) (17.5, -291.7419, 81.603)
thicken "Thicken27" operation add thickness 3 both sides no extend neighbours yes toward (-1, 0, 0) faces at (-2.5, -241.3228, 60.0882)
sketch "Sketch23" plane through (30, -65, -83.0011) normal (1, 0, 0) x (0, 0, -1)
  line L0 (143.3749, -211) -> (23.5408, 0) projected
  line L1 (112.1532, -211) -> (143.3749, -211) projected
  line L2 (0, 0) -> (112.1532, -211) projected
  line L3 (112.1532, -211) -> (227, -459)
  line L4 (227, -459) -> (284.2225, -459)
  line L5 (284.2225, -459) -> (143.3749, -211)
  point P0 (-83.0011, 65)
extrude "Extrusion19" add sketch "Sketch23" against normal blind 50
sketch "Sketch24" plane through (30.5, -258.7146, 133.7116) normal (1, 0, 0) x (0, -0.164399, -0.9863939)
  point P0 (89.3599, 277.1765)
ref_plane "Work Plane5" through (28.5, -258.7146, 133.7116) normal (1, 0, 0) x (0, -0.164399, -0.9863939)
sketch "Sketch25" plane through (28.5, -258.7146, 133.7116) normal (1, 0, 0) x (0, -0.164399, -0.9863939)
  arc A0 (29.5658, -75.8904) -> (29.5658, 75.8904) centre (0, 0) ccw projected
  arc A1 (28.9727, -74.3679) -> (28.9727, 74.3679) centre (0, 0) ccw
  line L0 (28.9727, 74.3679) -> (10, 52)
  line L1 (10, 52) -> (7, -23)
  line L2 (7, -23) -> (7, -70)
  line L3 (7, -70) -> (28.9727, -74.3679)
  point P0 (89.3599, 277.1765)
extrude "Extrusion20" cut sketch "Sketch25" against normal blind 31
sketch "Sketch26" plane through (-10, -65, -83.0011) normal (0, -0.4693491, 0.8830127) x (1, 0, 0)
  line L0 (-323, -166) -> (-187, -166)
  line L1 (-221, -167.8541) -> (-304, -167.8541) projected
  line L2 (-187, -166) -> (-176, 142)
  line L3 (-176, 142) -> (163, 177)
  line L4 (163, 177) -> (104, -166)
  line L5 (104, -166) -> (180, -544)
  line L6 (180, -544) -> (-44, -703)
  line L7 (-44, -703) -> (-203.3393, -623.5)
  line L8 (-203.3393, -623.5) -> (-196.1783, -422.9935)
  line L9 (-196.1783, -422.9935) -> (-455, -378.4732)
  line L10 (-455, -378.4732) -> (-323, -166)
  point P0 (10, 96.3523)
extrude "Extrusion21" cut sketch "Sketch26" along normal mid plane 1000
sketch "Sketch27" plane through (-305, -211.3842, -157.7664) normal (0, 0.8655505, 0.5008216) x (1, 0, 0)
  line L0 (0, 27) -> (45, 27)
  line L1 (45, 27) -> (45, -17)
  line L2 (45, -17) -> (8, -14)
  line L3 (8, -14) -> (-11, 2)
  line L4 (-11, 2) -> (0, 27)
  point P0 (305, -30.6891)
extrude "Extrusion22" cut sketch "Sketch27" against normal blind 10
sketch "Sketch28" plane through (-314, -167.2455, -244.3222) normal (0, -0.8830127, -0.4693491) x (1, 0, 0)
  line L0 (83, 0) -> (0, 0) projected
  line L1 (83, 70.0454) -> (83, 0) projected
  line L2 (0, 0) -> (0, 70.0454) projected
  point P0 (314, 137.2431)
sketch "Sketch29" plane through (-314, -167.2455, -244.3222) normal (0, -0.8830127, -0.4693491) x (1, 0, 0)
  line L0 (60, 15) -> (23, 15)
  line L1 (23, 15) -> (23, 52)
  line L2 (23, 52) -> (60, 52)
  line L3 (60, 52) -> (60, 15)
  point P0 (314, 137.2431)
extrude "Extrusion23" add sketch "Sketch29" along normal blind 70
sketch "Sketch30" plane through (-314, -229.0564, -277.1766) normal (0, -0.8830127, -0.4693491) x (1, 0, 0)
  line L0 (23, 15) -> (60, 15) projected
  line L1 (23, 15) -> (60, 15) projected
  line L2 (60, 15) -> (60, 52) projected
  line L3 (60, 52) -> (23, 52) projected
  line L4 (23, 52) -> (23, 15) projected
  line L5 (55, 15) -> (55, 52)
  line L6 (28, 15) -> (28, 52)
  point P0 (314, 137.2431)
extrude "Extrusion24" cut sketch "Sketch30" against normal blind 70 contours L6 L3 L5 L0
sketch "Sketch31" plane through (-254, -191.6516, -198.4055) normal (1, 0, 0) x (0, 0.4693491, -0.8830127)
  circle A0 centre (19, -62) radius 4.1231
  point P0 (-85.2431, 262.3523)
extrude "Extrusion25" cut sketch "Sketch31" against normal blind 70
sketch "Sketch32" plane through (-231, -119.9504, -136.0831) normal (1, 0, 0) x (0, 0.5008216, -0.8655505)
  circle A0 centre (36, -44) radius 10
  point P0 (-57.7131, 171.9765)
extrude "Extrusion26" add sketch "Sketch32" along normal blind 20
sketch "Sketch33" plane through (-211, -140.0051, -189.2791) normal (1, 0, 0) x (0, 0, -1)
  circle A0 centre (0, 0) radius 10 projected
  circle A1 centre (0, 0) radius 7
  point P0 (-189.2791, 140.0051)
extrude "Extrusion27" add sketch "Sketch33" along normal blind 20 contours A1
sketch "Sketch34" plane through (-191, -140.0051, -189.2791) normal (1, 0, 0) x (0, 0, -1)
  circle A0 centre (0, 0) radius 7 projected
  circle A1 centre (0, 0) radius 10
  point P0 (-189.2791, 140.0051)
extrude "Extrusion28" add sketch "Sketch34" along normal blind 20 contours A0 | A1
ref_plane "Work Plane6" through (-272.473, -82.2963, -195.1692) normal (-1, 0, 0) x (0, -0.5008216, 0.8655505)
mirror "Mirror1" about plane through (-272.473, -82.2963, -195.1692) normal (-1, 0, 0) of "Extrusion27", "Extrusion26", "Extrusion28"
sketch "Sketch35" plane through (-171, -140.0051, -189.2791) normal (1, 0, 0) x (0, 0, -1)
  circle A0 centre (0, 0) radius 18.2483
  point P0 (-189.2791, 140.0051)
extrude "Extrusion29" cut sketch "Sketch35" against normal blind 60
properties part number "grip"
